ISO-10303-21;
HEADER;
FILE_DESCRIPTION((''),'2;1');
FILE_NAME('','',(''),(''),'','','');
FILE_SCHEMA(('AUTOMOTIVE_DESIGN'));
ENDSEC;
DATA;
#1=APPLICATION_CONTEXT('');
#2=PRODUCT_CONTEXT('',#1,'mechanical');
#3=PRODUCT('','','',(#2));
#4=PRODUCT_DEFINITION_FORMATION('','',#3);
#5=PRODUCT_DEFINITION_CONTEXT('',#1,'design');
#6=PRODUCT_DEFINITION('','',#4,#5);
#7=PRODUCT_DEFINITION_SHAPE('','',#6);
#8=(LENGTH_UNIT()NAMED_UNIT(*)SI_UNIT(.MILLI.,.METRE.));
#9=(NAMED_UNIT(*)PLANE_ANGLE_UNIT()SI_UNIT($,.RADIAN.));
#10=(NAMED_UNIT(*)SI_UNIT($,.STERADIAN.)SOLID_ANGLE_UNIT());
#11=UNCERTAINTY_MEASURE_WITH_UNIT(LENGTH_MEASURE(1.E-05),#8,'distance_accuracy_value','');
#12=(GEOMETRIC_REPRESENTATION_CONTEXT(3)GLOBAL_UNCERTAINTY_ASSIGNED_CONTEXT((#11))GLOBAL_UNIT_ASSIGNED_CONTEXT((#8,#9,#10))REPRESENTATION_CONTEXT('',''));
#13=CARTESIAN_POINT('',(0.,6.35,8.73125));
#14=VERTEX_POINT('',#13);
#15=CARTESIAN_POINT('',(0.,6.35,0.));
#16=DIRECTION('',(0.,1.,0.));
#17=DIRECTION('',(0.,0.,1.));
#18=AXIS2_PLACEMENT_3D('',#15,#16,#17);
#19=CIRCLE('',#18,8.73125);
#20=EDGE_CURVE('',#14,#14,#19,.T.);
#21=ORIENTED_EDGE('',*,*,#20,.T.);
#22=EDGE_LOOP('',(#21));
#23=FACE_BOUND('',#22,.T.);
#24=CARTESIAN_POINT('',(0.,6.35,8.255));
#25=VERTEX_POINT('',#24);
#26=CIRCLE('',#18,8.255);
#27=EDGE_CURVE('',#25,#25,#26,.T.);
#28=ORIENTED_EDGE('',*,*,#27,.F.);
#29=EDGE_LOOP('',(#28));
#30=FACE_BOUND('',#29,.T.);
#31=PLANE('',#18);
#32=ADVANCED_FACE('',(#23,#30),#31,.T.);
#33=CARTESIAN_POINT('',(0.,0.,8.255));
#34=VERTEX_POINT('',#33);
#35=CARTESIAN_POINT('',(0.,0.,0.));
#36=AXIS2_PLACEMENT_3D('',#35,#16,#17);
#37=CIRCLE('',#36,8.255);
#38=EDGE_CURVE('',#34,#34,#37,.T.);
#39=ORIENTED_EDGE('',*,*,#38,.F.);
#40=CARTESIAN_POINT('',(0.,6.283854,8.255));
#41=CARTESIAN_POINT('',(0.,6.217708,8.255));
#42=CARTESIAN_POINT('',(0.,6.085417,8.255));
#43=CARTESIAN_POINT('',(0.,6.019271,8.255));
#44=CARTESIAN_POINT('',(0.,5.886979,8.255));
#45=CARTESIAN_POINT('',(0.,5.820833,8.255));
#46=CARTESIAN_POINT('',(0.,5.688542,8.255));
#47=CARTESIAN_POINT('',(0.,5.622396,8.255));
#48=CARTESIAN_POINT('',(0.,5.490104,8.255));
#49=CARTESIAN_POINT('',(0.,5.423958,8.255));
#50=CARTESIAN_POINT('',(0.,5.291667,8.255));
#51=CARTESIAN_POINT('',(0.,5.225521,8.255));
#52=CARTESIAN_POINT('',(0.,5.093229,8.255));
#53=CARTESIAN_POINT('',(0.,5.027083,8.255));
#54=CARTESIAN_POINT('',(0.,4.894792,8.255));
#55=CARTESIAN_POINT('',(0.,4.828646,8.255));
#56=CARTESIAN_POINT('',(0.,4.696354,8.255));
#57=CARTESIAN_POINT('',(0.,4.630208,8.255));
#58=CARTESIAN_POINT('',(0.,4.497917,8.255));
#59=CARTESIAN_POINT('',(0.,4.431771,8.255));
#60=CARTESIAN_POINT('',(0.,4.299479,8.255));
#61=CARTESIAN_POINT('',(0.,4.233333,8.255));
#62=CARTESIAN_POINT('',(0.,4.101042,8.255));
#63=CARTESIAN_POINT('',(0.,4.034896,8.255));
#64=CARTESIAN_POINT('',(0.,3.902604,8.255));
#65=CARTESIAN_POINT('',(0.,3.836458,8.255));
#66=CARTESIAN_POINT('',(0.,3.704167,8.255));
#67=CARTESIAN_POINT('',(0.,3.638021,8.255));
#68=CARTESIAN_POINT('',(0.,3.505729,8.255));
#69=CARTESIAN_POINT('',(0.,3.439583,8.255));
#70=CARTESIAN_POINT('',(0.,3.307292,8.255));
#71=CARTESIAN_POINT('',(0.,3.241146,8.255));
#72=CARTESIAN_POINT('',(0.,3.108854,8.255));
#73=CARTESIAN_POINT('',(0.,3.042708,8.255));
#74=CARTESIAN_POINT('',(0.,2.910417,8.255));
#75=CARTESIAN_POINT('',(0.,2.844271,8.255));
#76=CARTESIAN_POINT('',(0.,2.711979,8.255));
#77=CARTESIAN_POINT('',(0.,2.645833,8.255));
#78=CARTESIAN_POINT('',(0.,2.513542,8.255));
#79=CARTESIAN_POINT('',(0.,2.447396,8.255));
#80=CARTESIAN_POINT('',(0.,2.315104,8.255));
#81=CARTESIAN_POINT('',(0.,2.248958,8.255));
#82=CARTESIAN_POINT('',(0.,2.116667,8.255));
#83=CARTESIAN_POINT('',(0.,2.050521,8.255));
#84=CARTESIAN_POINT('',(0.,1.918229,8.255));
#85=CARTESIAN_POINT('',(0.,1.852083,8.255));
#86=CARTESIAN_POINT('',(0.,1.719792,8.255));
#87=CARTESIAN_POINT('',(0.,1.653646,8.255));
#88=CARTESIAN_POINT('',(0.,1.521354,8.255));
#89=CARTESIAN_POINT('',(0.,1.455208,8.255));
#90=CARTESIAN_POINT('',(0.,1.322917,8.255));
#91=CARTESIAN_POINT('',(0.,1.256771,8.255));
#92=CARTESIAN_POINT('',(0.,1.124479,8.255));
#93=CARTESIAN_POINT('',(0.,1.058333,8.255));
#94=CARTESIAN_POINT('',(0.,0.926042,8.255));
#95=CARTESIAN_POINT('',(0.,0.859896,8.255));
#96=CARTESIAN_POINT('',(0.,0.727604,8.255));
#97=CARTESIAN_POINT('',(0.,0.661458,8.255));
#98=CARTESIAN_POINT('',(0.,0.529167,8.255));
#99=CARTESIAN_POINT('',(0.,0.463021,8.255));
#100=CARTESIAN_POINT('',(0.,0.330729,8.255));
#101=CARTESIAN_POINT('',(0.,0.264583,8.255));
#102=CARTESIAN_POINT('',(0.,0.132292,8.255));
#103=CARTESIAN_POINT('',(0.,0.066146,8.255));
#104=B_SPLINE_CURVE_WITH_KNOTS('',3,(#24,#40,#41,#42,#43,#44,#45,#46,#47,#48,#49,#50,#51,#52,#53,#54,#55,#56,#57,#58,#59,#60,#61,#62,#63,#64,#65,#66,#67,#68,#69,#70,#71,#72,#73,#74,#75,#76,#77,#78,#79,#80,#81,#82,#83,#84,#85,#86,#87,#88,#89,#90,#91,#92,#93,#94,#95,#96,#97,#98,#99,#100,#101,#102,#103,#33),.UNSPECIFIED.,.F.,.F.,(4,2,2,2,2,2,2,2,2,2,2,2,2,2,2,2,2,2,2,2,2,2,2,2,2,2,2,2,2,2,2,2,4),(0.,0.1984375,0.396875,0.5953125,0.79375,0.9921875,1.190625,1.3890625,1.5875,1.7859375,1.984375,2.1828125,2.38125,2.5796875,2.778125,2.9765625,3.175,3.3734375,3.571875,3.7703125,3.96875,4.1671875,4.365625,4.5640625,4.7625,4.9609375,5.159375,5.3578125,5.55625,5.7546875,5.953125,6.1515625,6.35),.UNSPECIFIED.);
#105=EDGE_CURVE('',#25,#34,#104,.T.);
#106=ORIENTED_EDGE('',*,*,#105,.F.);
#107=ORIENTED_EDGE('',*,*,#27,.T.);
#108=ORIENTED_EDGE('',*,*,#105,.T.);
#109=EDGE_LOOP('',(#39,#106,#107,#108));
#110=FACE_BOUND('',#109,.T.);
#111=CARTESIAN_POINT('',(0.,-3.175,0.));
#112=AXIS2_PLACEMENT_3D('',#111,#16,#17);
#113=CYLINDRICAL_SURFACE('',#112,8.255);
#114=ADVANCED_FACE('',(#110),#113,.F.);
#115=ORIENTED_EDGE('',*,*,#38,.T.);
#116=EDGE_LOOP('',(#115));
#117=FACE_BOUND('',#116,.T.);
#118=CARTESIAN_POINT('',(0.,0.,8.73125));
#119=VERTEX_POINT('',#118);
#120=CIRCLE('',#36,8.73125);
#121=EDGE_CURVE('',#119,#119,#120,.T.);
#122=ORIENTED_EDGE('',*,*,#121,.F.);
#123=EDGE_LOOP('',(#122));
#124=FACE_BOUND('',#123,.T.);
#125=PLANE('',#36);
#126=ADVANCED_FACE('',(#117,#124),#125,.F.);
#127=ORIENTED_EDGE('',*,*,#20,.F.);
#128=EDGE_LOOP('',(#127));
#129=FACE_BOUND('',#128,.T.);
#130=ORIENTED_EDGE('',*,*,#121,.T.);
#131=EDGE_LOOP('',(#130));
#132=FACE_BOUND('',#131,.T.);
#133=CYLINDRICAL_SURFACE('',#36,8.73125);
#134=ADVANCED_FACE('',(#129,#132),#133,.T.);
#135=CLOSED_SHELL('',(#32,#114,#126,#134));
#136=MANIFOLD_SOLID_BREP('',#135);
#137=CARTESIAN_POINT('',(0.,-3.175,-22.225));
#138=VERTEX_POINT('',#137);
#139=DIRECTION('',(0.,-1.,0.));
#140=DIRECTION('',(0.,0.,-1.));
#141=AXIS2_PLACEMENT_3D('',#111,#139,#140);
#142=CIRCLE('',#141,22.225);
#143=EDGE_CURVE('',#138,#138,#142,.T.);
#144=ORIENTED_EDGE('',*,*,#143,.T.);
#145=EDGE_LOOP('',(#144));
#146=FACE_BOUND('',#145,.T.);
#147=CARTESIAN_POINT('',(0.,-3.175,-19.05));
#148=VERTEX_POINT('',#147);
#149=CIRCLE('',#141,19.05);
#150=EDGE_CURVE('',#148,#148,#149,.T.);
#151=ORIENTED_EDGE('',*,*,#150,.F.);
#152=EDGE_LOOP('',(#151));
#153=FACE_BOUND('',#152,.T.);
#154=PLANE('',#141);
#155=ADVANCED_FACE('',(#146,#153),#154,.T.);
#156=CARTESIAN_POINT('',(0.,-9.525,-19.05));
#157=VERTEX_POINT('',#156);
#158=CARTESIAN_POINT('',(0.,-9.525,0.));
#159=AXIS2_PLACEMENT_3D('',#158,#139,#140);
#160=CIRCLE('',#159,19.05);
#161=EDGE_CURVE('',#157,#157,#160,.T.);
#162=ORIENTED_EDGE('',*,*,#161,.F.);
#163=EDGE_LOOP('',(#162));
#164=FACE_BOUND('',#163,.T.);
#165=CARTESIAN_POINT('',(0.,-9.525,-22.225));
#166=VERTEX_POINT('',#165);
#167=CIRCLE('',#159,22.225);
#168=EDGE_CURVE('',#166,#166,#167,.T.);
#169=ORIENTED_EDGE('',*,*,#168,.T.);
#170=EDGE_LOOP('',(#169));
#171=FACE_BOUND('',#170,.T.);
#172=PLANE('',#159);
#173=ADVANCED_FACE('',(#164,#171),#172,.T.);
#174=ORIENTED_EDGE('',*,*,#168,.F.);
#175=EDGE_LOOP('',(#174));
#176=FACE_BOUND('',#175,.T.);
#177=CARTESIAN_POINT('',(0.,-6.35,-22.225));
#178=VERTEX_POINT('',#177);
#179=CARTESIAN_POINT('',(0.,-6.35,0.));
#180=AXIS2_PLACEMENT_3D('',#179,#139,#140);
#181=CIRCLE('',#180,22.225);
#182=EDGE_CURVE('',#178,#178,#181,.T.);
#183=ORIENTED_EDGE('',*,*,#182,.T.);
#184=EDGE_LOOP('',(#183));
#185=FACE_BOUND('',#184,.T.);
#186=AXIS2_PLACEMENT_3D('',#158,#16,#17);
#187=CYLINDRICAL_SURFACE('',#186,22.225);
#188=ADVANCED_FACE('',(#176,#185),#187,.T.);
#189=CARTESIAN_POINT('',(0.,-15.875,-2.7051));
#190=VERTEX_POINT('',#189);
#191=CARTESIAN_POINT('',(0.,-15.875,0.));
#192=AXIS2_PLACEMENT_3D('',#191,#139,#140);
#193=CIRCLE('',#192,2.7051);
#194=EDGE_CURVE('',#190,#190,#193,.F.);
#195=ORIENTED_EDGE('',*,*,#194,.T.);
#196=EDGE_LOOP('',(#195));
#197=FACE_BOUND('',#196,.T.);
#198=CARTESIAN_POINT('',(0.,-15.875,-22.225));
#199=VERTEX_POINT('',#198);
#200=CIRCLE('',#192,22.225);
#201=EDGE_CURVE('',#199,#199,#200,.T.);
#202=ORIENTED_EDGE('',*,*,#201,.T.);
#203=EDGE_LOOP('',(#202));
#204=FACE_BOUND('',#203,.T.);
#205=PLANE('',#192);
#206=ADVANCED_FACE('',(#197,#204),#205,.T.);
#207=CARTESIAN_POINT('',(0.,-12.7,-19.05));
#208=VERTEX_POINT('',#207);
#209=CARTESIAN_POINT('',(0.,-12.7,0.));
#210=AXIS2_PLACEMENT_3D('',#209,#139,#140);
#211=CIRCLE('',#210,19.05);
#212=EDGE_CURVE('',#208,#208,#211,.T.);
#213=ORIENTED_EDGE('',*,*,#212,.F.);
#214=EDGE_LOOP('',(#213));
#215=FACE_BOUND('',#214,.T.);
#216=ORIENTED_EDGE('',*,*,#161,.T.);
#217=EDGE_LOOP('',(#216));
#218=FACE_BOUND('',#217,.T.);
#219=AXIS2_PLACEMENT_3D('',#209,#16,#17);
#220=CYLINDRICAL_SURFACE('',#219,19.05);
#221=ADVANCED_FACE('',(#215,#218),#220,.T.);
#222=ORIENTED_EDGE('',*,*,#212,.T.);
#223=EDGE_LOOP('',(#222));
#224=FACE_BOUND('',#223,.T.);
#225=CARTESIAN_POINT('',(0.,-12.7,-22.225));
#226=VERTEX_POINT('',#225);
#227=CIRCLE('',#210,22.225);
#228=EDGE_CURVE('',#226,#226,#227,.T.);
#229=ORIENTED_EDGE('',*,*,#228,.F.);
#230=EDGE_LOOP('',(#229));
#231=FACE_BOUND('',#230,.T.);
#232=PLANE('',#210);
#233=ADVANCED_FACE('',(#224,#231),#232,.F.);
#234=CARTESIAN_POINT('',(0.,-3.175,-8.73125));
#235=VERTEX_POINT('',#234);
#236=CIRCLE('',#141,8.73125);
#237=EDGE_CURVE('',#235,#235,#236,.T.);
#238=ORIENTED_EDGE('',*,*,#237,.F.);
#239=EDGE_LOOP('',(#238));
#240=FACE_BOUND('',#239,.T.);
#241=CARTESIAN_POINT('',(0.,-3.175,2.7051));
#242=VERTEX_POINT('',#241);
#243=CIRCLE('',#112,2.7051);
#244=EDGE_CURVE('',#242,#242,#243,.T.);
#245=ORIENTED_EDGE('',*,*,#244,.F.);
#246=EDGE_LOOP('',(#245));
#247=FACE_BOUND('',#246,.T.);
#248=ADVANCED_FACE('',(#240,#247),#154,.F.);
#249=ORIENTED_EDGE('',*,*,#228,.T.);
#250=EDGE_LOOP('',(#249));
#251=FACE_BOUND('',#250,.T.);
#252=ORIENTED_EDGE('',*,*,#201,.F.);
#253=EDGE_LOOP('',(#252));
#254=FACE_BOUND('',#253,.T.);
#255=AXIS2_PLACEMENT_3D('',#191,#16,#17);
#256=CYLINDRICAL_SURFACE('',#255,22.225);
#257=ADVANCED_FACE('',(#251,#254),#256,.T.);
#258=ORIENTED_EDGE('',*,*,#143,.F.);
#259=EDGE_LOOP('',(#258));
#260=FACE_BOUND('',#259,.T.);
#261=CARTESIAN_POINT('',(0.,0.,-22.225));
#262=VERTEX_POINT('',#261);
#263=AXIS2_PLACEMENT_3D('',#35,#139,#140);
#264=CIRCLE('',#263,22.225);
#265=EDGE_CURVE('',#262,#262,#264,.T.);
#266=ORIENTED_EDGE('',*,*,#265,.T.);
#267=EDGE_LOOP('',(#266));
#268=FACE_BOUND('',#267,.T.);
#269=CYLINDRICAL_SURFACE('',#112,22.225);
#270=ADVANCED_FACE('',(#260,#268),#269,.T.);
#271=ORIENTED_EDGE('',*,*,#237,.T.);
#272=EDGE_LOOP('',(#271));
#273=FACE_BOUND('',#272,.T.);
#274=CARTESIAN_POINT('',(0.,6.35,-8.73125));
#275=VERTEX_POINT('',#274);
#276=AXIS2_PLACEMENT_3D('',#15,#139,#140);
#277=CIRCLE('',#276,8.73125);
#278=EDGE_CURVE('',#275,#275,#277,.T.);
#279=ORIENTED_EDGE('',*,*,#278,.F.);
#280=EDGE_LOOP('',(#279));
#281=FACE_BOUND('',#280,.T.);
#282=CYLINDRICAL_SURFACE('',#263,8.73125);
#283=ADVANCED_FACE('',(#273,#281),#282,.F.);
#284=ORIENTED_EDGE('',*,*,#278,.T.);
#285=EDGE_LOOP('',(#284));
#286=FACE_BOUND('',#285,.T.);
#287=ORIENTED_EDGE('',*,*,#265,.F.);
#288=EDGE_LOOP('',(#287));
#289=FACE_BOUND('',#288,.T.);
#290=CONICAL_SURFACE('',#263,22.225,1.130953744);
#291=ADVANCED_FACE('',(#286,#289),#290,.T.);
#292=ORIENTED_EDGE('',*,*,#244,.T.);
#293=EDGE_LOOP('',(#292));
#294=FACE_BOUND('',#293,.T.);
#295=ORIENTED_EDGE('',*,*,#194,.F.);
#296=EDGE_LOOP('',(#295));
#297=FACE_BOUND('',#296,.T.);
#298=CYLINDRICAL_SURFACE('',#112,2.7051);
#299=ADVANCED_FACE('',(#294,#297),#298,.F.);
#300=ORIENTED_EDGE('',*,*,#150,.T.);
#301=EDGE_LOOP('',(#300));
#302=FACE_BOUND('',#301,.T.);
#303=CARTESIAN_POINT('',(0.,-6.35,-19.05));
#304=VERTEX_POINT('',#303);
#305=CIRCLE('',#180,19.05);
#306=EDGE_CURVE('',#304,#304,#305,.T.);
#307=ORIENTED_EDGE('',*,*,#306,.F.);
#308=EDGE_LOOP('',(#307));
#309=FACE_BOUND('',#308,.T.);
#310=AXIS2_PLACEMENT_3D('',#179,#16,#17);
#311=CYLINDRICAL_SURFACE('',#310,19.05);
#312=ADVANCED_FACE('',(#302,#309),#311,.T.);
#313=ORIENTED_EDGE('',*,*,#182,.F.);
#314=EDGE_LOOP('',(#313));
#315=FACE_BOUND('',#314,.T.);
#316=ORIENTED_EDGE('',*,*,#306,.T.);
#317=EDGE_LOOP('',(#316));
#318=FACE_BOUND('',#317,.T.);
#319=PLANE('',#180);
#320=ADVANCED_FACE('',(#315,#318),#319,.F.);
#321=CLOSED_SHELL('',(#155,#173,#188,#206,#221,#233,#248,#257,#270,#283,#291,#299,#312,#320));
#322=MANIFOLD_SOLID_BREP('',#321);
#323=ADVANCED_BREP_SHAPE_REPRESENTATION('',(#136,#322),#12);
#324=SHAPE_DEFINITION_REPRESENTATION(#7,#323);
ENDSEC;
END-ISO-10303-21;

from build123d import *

# Parameters (mm, degrees)
BOSS_EXTRUDE1_START             = 3.175
SKETCH2_R                       = 22.225
SKETCH2_R_2                     = 8.73125
BOSS_EXTRUDE1_DEPTH             = 3.175
SKETCH3_R                       = 19.05
BOSS_EXTRUDE2_DEPTH             = 3.175
BOSS_EXTRUDE3_START             = 3.175
SKETCH4_R                       = 22.225
BOSS_EXTRUDE3_DEPTH             = 3.175
SKETCH5_R                       = 19.05
BOSS_EXTRUDE4_DEPTH             = 3.175
BOSS_EXTRUDE5_START             = 3.175
SKETCH6_R                       = 22.225
BOSS_EXTRUDE5_DEPTH             = 3.175
SKETCH7_R                       = 8.73125
BOSS_EXTRUDE6_DEPTH             = 6.35
SKETCH10_R                      = 8.255
CUT_EXTRUDE1_DEPTH              = 9.525
F_1_4_28_START                  = -15.875
F_1_4_28_TAPPED_HOLE1_OUTLINE_R = 2.7051
F_1_4_28_TAPPED_HOLE1_DEPTH     = 12.7


# Read off the part's stored shape, not the designer's step: 1/4-28 Tapped Hole1
with BuildPart() as part:
    # Sketch1 → Revolve1 (revolve)
    with BuildSketch(Plane.XY, mode=Mode.PRIVATE) as revolve1_sk:
        Polygon((8.73125, 0), (22.225, 0), (8.73125, 6.35), align=None)
    revolve(revolve1_sk.sketch.rotate(Axis((0, 0, 0), (0, 1, 0)), 90), axis=Axis((0, 0, 0), (0, 1, 0)))

    # Sketch2 → Boss-Extrude1 (add)
    with BuildSketch(Plane.XZ.offset(BOSS_EXTRUDE1_START)):
        with Locations(Location((0, 0, 0), (0, 0, 270))):
            Circle(SKETCH2_R)
        with Locations(Location((0, 0, 0), (0, 0, 270))):
            Circle(SKETCH2_R_2, mode=Mode.SUBTRACT)
    extrude(amount=-BOSS_EXTRUDE1_DEPTH)

    # Sketch3 → Boss-Extrude2 (add)
    with BuildSketch(Plane.XZ.offset(3.175)):
        with Locations(Location((0, 0, 0), (0, 0, 270))):
            Circle(SKETCH3_R)
    extrude(amount=BOSS_EXTRUDE2_DEPTH)

    # Sketch4 → Boss-Extrude3 (add)
    with BuildSketch(Plane.XZ.offset(6.35).offset(BOSS_EXTRUDE3_START)):
        with Locations(Location((0, 0, 0), (0, 0, 270))):
            Circle(SKETCH4_R)
    extrude(amount=-BOSS_EXTRUDE3_DEPTH)

    # Sketch5 → Boss-Extrude4 (add)
    with BuildSketch(Plane.XZ.offset(9.525)):
        with Locations(Location((0, 0, 0), (0, 0, 270))):
            Circle(SKETCH5_R)
    extrude(amount=BOSS_EXTRUDE4_DEPTH)

    # Sketch6 → Boss-Extrude5 (add)
    with BuildSketch(Plane.XZ.offset(12.7).offset(BOSS_EXTRUDE5_START)):
        with Locations(Location((0, 0, 0), (0, 0, 270))):
            Circle(SKETCH6_R)
    extrude(amount=-BOSS_EXTRUDE5_DEPTH)

    # 1/4-28 Tapped Hole1 outline → 1/4-28 Tapped Hole1 (cut)
    with BuildSketch(Plane(origin=(0, 0, 0), x_dir=(1, 0, 0), z_dir=(0, 1, 0)).offset(F_1_4_28_START)):
        Circle(F_1_4_28_TAPPED_HOLE1_OUTLINE_R)
    extrude(amount=F_1_4_28_TAPPED_HOLE1_DEPTH, mode=Mode.SUBTRACT)


with BuildPart() as body_2:
    # Sketch7 → Boss-Extrude6 (new body)
    with BuildSketch(Plane(origin=(0, 6.35, 0), x_dir=(1, 0, 0), z_dir=(0, 1, 0))):
        with Locations(Location((0, 0, 0), (0, 0, 270))):
            Circle(SKETCH7_R)
    extrude(amount=-BOSS_EXTRUDE6_DEPTH)

    # Sketch10 → Cut-Extrude1 (cut)
    with BuildSketch(Plane(origin=(0, 6.35, 0), x_dir=(1, 0, 0), z_dir=(0, 1, 0))):
        with Locations(Location((0, 0, 0), (0, 0, 270))):
            Circle(SKETCH10_R)
    extrude(amount=-CUT_EXTRUDE1_DEPTH, mode=Mode.SUBTRACT)


solid = Compound([part.part, body_2.part])
